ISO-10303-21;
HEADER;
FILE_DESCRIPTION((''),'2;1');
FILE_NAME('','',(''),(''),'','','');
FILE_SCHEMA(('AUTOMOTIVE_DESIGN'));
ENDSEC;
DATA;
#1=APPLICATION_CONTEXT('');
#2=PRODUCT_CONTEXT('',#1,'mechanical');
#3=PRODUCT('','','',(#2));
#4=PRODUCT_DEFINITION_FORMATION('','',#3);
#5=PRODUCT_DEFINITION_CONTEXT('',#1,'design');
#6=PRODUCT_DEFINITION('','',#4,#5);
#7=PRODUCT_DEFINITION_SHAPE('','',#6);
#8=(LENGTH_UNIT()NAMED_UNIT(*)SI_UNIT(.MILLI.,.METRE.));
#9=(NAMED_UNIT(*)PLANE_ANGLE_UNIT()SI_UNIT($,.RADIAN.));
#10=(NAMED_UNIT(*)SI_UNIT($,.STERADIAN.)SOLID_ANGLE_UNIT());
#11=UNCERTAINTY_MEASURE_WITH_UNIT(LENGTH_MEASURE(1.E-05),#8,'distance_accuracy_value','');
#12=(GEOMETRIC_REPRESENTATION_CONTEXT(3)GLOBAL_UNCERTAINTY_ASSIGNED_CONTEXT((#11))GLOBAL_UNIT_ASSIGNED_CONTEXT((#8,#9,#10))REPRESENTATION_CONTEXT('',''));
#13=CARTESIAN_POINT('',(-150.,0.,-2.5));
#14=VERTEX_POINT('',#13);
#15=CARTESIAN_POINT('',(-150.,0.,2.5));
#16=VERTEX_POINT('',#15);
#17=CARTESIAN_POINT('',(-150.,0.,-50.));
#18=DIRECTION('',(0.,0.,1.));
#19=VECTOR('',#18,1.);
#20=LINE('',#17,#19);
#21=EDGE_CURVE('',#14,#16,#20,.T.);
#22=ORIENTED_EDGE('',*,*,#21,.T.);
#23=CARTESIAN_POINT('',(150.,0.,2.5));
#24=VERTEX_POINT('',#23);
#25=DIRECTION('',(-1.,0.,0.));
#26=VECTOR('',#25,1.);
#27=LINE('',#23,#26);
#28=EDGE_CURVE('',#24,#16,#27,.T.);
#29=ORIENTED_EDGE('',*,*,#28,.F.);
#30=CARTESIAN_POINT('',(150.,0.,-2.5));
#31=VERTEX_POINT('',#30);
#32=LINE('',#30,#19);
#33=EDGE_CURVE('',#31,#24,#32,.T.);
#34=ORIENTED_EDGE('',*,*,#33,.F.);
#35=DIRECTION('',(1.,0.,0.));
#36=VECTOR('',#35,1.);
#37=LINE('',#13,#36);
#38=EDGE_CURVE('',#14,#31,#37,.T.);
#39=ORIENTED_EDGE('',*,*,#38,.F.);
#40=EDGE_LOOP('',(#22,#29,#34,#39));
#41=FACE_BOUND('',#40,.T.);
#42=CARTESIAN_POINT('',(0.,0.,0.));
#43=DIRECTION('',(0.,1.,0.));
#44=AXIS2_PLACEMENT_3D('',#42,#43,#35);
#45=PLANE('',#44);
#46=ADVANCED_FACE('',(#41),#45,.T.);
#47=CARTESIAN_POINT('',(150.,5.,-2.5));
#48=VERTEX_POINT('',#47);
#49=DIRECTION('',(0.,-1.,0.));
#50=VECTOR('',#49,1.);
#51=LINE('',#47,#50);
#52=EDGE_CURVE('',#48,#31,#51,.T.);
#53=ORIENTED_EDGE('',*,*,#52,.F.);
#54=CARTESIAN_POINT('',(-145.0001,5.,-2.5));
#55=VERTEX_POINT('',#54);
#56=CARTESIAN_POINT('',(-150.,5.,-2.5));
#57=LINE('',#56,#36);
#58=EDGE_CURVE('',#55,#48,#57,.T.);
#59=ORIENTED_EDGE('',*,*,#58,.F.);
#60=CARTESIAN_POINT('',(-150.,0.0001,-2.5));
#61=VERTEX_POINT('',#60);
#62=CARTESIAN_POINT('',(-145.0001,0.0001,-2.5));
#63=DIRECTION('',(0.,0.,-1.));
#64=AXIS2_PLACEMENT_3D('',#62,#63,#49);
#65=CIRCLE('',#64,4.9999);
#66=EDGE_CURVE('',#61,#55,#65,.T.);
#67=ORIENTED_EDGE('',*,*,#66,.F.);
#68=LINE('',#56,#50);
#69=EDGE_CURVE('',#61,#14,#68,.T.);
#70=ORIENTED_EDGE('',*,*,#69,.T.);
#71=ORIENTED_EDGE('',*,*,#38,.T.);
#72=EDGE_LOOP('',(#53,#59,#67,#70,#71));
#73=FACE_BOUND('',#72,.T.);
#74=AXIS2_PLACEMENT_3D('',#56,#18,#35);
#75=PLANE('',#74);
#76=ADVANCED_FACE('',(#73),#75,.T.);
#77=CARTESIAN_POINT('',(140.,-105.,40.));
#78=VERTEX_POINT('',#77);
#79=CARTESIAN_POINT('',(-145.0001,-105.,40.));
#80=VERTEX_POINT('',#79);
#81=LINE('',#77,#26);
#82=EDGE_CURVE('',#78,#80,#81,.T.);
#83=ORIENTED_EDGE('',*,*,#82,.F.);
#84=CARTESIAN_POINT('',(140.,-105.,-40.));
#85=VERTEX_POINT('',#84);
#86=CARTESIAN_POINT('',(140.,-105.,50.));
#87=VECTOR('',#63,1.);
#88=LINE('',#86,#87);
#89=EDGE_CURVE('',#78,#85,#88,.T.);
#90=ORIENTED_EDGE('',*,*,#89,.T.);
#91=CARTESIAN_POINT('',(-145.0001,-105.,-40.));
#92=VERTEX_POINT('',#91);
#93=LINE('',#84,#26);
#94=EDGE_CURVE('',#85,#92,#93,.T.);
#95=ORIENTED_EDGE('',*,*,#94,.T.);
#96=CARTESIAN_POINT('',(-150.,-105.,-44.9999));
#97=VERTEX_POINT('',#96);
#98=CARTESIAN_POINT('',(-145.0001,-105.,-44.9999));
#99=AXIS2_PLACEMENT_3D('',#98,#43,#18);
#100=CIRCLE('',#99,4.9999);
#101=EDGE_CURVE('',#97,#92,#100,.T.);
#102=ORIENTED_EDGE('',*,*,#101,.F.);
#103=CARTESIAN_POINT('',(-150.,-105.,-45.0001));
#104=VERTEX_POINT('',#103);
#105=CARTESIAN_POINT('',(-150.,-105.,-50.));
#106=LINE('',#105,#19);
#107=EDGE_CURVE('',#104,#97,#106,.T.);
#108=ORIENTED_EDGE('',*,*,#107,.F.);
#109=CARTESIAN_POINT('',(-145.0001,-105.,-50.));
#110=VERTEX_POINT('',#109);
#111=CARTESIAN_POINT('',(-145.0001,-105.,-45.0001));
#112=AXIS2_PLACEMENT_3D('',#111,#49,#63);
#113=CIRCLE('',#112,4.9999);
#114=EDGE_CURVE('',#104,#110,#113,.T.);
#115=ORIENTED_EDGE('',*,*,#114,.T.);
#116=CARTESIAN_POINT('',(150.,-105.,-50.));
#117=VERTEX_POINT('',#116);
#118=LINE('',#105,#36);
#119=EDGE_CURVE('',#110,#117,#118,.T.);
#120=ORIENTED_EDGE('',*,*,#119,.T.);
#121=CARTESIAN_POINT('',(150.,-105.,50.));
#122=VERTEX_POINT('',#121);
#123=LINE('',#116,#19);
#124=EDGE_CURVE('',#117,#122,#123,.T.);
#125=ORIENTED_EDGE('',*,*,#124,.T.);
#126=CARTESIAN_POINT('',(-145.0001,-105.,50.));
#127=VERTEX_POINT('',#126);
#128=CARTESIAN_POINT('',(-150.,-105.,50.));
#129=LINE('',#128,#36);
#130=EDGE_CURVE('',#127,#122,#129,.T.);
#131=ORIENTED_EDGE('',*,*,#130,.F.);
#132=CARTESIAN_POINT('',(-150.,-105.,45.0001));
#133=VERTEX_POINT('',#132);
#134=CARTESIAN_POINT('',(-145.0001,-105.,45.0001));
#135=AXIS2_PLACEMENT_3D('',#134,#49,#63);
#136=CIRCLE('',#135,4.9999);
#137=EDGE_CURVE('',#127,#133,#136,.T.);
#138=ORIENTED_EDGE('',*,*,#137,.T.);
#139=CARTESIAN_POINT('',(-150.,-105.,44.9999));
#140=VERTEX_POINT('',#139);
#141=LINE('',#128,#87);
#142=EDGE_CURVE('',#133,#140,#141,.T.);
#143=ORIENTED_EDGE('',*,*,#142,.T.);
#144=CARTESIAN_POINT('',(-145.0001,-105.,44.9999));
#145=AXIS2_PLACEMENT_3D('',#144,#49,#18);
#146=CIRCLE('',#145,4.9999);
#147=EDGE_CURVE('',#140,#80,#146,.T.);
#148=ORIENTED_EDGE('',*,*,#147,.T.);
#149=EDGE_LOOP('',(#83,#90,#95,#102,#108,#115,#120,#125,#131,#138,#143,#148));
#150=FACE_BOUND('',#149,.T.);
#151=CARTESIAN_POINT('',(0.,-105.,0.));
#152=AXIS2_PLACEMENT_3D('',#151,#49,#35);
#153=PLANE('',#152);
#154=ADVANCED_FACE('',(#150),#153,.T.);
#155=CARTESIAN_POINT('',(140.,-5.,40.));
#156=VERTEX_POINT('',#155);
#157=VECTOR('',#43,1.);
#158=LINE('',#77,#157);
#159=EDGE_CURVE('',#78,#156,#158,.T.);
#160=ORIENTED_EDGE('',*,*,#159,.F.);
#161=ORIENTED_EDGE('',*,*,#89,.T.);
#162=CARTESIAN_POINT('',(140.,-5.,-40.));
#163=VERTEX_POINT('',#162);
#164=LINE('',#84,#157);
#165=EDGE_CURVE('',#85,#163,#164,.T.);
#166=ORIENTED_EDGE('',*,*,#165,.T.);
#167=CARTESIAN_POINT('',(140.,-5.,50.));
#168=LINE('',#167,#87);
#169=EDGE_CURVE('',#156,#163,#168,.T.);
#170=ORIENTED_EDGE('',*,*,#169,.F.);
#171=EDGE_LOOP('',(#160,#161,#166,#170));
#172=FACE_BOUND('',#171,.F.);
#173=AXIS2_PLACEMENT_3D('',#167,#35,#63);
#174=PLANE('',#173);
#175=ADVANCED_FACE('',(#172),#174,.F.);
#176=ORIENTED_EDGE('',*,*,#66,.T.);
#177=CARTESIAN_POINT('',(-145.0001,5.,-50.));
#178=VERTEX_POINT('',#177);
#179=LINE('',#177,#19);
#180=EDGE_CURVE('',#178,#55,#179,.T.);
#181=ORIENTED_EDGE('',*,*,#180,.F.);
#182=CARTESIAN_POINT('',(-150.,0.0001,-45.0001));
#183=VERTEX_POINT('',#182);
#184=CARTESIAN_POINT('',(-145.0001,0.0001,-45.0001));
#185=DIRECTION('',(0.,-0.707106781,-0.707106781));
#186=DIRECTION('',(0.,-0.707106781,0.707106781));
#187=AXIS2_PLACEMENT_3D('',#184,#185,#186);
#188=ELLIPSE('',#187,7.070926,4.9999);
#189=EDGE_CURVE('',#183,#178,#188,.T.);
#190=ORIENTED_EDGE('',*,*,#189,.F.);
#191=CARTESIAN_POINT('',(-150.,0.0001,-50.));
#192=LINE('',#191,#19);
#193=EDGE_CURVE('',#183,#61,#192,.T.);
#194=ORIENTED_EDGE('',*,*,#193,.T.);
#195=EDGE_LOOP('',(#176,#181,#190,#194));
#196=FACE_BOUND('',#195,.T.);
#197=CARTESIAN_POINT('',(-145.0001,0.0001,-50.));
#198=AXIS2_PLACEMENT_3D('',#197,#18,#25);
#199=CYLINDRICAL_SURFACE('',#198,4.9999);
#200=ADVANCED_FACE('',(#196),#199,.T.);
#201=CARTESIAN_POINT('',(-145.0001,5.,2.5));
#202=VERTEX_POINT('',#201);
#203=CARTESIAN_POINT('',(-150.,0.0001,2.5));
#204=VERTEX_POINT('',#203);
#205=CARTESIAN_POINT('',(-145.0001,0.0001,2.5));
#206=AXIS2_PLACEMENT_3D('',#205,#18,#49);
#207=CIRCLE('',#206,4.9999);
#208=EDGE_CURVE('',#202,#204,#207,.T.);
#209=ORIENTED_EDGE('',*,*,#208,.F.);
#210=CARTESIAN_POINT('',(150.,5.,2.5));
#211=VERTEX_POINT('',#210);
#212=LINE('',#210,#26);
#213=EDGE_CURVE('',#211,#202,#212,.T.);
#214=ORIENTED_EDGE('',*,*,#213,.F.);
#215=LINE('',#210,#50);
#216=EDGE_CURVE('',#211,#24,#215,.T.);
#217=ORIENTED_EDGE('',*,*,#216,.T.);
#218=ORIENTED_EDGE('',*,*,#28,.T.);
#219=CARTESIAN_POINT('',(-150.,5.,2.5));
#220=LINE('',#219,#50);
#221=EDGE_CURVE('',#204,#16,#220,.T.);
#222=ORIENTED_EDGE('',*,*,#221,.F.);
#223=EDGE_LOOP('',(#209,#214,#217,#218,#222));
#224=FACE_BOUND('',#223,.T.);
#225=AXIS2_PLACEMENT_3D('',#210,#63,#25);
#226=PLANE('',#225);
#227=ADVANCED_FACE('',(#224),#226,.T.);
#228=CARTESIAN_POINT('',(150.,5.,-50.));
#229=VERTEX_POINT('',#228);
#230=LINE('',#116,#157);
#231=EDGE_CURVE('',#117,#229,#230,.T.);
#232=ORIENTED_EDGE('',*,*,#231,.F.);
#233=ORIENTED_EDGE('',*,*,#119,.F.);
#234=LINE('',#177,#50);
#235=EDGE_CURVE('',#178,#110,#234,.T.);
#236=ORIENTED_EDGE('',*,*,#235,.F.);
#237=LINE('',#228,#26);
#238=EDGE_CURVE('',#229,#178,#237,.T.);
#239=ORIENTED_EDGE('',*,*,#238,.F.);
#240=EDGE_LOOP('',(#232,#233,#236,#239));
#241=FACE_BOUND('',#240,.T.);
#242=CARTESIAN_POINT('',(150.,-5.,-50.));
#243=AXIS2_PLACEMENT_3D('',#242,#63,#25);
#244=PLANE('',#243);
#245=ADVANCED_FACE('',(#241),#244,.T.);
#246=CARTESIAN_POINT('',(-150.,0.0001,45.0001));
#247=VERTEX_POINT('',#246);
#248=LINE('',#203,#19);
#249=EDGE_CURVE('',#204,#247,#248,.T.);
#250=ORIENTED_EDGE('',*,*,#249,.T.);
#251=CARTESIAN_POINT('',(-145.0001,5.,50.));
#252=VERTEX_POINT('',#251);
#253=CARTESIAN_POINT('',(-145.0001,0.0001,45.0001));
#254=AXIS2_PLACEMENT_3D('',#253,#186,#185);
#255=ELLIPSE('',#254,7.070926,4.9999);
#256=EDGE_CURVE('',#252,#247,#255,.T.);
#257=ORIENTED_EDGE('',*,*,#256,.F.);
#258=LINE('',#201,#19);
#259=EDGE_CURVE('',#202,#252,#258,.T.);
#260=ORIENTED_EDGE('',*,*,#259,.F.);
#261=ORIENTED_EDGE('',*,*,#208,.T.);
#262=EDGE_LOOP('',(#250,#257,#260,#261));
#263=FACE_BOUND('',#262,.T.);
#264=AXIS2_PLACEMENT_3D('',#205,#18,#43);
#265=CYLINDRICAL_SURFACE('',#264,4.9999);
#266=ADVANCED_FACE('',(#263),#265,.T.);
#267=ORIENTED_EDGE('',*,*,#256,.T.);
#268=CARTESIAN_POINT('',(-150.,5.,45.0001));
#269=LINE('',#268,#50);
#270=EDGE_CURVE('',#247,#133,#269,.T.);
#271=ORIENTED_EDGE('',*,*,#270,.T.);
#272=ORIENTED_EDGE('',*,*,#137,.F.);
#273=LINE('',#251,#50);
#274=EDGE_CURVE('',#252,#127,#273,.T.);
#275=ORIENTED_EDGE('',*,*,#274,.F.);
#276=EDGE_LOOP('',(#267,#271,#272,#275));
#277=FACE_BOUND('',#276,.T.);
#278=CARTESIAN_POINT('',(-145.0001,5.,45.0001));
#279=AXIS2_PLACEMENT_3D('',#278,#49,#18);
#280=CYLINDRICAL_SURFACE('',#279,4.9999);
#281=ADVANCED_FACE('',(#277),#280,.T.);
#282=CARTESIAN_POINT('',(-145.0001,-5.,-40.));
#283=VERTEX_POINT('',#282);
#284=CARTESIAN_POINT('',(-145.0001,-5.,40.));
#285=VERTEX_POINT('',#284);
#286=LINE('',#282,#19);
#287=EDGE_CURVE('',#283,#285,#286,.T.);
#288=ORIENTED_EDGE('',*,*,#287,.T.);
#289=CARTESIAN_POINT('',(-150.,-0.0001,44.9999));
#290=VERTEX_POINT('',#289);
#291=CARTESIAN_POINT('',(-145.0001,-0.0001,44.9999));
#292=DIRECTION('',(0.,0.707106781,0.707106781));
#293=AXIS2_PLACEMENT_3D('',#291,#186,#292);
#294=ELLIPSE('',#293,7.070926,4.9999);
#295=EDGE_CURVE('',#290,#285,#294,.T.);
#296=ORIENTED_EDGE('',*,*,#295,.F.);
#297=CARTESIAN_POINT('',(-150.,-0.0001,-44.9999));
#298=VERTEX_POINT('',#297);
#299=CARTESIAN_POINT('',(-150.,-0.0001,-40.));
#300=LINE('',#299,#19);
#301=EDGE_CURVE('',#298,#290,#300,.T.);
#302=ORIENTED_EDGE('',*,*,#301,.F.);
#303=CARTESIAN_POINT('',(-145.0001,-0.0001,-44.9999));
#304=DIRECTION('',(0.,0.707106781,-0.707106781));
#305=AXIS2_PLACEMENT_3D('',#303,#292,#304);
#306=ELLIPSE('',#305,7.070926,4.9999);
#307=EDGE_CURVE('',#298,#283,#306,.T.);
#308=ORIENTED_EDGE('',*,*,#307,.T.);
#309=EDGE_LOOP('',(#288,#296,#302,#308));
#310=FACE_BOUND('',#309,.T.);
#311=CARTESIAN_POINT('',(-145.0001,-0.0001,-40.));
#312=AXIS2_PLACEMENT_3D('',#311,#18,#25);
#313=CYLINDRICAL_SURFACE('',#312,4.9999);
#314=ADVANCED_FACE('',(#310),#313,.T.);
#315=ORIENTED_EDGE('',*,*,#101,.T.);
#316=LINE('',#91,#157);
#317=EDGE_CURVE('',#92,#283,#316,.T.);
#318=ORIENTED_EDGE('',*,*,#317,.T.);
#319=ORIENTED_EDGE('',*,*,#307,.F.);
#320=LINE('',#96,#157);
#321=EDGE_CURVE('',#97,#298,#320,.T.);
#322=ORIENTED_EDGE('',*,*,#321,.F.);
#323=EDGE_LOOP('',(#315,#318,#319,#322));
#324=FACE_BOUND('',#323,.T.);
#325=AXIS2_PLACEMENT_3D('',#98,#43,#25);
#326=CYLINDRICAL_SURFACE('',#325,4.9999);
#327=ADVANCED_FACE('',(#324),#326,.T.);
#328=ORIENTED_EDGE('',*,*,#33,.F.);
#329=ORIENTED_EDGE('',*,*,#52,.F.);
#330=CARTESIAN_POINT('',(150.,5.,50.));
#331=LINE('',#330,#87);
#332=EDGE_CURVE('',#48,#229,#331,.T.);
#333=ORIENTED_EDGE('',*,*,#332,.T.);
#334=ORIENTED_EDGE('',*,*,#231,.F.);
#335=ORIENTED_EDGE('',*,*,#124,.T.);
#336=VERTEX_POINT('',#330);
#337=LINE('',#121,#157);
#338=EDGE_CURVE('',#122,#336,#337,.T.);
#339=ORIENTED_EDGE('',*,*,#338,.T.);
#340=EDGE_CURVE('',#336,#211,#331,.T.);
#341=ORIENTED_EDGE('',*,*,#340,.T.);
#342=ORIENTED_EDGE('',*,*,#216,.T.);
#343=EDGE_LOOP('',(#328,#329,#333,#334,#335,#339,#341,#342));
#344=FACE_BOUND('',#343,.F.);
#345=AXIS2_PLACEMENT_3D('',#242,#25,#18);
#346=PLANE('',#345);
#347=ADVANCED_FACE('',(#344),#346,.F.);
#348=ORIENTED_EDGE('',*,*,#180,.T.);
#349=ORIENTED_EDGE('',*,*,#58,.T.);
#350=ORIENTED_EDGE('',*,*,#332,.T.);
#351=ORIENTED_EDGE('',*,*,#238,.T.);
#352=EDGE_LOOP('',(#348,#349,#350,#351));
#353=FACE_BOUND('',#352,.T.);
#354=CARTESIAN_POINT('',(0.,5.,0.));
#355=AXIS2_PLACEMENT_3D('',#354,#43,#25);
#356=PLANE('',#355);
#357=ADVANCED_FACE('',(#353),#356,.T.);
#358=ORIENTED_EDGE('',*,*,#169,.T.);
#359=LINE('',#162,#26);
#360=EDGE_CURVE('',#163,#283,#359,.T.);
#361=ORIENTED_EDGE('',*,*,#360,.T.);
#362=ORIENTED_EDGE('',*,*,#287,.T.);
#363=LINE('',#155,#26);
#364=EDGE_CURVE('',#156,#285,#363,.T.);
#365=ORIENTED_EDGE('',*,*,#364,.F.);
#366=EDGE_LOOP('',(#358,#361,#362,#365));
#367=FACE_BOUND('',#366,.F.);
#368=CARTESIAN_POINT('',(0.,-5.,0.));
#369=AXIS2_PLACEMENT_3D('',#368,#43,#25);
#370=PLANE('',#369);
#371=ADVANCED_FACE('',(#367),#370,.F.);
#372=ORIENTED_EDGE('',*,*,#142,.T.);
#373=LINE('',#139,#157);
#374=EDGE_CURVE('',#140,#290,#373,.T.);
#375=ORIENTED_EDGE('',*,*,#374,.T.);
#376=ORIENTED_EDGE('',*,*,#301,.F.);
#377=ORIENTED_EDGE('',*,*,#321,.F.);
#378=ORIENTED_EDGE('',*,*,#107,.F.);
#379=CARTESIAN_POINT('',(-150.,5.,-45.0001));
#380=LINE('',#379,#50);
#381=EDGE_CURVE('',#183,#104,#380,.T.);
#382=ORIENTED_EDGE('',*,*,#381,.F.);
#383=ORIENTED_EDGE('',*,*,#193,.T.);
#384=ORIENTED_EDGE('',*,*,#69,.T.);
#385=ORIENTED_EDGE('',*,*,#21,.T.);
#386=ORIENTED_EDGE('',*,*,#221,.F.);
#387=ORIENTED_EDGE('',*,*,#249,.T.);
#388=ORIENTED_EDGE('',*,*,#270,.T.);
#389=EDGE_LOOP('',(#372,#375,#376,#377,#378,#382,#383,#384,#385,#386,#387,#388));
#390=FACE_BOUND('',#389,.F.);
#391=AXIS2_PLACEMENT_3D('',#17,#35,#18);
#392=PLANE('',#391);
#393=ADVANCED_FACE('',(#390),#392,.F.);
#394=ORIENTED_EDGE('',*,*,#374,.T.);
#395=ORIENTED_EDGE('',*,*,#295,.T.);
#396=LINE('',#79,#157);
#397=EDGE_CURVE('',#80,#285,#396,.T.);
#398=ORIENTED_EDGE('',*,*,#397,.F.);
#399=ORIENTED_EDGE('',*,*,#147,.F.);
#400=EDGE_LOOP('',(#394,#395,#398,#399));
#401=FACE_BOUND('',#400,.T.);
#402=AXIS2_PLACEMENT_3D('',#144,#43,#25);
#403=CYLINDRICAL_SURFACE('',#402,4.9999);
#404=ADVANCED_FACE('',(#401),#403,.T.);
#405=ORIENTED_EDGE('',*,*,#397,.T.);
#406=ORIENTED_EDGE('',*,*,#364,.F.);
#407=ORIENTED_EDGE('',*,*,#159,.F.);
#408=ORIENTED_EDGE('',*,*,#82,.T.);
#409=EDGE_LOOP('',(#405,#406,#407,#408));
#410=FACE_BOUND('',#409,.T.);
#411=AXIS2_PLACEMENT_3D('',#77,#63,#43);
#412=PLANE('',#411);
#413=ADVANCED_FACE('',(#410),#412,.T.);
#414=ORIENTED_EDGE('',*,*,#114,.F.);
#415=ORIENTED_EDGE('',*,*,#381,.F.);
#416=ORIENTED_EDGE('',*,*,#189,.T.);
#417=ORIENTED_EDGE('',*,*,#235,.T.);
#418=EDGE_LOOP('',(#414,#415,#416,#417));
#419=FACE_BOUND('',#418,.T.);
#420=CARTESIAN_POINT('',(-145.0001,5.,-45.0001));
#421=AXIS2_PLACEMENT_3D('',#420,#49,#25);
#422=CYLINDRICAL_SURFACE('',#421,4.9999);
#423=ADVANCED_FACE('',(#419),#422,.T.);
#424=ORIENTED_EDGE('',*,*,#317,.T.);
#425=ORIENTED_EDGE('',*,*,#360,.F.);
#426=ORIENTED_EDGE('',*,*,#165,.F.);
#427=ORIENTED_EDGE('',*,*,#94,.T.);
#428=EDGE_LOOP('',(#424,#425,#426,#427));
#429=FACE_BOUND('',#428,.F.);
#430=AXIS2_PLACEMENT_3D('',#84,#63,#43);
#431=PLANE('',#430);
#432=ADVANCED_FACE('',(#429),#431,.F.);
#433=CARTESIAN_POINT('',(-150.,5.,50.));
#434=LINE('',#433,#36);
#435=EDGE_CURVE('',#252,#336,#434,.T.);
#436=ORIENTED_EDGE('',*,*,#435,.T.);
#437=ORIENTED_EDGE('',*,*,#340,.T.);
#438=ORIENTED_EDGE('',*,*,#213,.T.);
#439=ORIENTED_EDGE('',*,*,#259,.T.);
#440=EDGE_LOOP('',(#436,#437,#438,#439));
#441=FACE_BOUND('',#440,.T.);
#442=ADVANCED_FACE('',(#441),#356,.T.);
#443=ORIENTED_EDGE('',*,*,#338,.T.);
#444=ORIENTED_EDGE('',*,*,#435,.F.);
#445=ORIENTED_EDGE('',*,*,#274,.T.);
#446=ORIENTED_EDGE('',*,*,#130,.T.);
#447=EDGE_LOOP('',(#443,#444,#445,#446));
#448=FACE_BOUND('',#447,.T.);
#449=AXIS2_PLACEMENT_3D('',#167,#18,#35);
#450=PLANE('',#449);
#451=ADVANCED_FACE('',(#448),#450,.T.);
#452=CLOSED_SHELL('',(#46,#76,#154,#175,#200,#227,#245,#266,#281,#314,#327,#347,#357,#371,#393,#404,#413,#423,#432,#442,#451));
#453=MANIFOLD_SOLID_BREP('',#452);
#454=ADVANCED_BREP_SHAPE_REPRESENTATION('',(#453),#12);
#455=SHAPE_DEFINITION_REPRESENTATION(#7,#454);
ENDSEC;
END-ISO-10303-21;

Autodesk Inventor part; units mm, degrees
ref_plane "YZ Plane" through (0, 0, 0) normal (1, 0, 0) x (0, 1, 0)
ref_plane "XZ Plane" through (0, 0, 0) normal (0, 1, 0) x (-1, 0, 0)
ref_plane "XY Plane" through (0, 0, 0) normal (0, 0, 1) x (1, 0, 0)
sketch "草图1" plane through (0, 0, 0) normal (0, 1, 0) x (-1, 0, 0)
  line L0 (-150, -50) -> (150, -50)
  line L1 (150, -50) -> (150, 50)
  line L2 (150, 50) -> (-150, 50)
  line L3 (-150, 50) -> (-150, -50)
  line L4 (-150, -50) -> (150, 50) construction
  line L5 (150, -50) -> (-150, 50) construction
  point P0 (0, 0)
  dimension "d0" = 300
  dimension "d1" = 100
extrude "拉伸1" add sketch "草图1" along normal mid plane 10
sketch "草图2" plane through (0, 5, 0) normal (0, 1, 0) x (1, 0, 0)
  line L0 (-150, 50) -> (-150, -50) projected
  line L1 (150, -2.5) -> (-150, -2.5)
  line L2 (-150, -2.5) -> (-150, 2.5)
  line L3 (-150, 2.5) -> (150, 2.5)
  line L4 (150, 2.5) -> (150, -2.5)
  line L5 (150, -2.5) -> (-150, 2.5) construction
  line L6 (-150, -2.5) -> (150, 2.5) construction
  point P0 (0, 0)
  dimension "d4" = 5
extrude "拉伸2" cut sketch "草图2" against normal blind 5
sketch "草图3" plane through (0, -5, 0) normal (0, -1, 0) x (1, 0, 0)
  line L0 (-150, 50) -> (150, 50) projected
  line L1 (150, -50) -> (-150, -50) projected
  line L2 (150, 50) -> (140, 50)
  line L3 (140, 50) -> (140, -50)
  line L4 (140, -50) -> (150, -50)
  line L5 (150, -50) -> (150, 50)
  point P0 (0, 0)
extrude "拉伸3" add sketch "草图3" along normal blind 100
sketch "草图4" plane through (140, -5, -50) normal (-1, 0, 0) x (0, 0, 1)
  line L0 (100, 10) -> (100, -100) projected
  line L1 (100, 0) -> (0, 0) projected
  line L2 (100, -100) -> (90, -100)
  line L3 (90, -100) -> (90, 0)
  line L4 (90, 0) -> (100, 0)
  line L5 (100, 0) -> (100, -100)
  line L6 (0, -100) -> (0, 10) projected
  line L7 (0, -100) -> (10, -100)
  line L8 (10, -100) -> (10, 0)
  line L9 (10, 0) -> (0, 0)
  line L10 (0, 0) -> (0, -100)
  point P0 (50, 5)
extrude "拉伸4" add sketch "草图4" along normal blind 290
fillet "圆角1" radius 5 7 edges at (-150, -55, 40) (-150, -50, 50) (-150, -55, -40) (-150, -50, -50) (-150, -5, 0) (-150, 5, -26.25) (-150, 5, 26.25)
properties part number "滑盖上"
